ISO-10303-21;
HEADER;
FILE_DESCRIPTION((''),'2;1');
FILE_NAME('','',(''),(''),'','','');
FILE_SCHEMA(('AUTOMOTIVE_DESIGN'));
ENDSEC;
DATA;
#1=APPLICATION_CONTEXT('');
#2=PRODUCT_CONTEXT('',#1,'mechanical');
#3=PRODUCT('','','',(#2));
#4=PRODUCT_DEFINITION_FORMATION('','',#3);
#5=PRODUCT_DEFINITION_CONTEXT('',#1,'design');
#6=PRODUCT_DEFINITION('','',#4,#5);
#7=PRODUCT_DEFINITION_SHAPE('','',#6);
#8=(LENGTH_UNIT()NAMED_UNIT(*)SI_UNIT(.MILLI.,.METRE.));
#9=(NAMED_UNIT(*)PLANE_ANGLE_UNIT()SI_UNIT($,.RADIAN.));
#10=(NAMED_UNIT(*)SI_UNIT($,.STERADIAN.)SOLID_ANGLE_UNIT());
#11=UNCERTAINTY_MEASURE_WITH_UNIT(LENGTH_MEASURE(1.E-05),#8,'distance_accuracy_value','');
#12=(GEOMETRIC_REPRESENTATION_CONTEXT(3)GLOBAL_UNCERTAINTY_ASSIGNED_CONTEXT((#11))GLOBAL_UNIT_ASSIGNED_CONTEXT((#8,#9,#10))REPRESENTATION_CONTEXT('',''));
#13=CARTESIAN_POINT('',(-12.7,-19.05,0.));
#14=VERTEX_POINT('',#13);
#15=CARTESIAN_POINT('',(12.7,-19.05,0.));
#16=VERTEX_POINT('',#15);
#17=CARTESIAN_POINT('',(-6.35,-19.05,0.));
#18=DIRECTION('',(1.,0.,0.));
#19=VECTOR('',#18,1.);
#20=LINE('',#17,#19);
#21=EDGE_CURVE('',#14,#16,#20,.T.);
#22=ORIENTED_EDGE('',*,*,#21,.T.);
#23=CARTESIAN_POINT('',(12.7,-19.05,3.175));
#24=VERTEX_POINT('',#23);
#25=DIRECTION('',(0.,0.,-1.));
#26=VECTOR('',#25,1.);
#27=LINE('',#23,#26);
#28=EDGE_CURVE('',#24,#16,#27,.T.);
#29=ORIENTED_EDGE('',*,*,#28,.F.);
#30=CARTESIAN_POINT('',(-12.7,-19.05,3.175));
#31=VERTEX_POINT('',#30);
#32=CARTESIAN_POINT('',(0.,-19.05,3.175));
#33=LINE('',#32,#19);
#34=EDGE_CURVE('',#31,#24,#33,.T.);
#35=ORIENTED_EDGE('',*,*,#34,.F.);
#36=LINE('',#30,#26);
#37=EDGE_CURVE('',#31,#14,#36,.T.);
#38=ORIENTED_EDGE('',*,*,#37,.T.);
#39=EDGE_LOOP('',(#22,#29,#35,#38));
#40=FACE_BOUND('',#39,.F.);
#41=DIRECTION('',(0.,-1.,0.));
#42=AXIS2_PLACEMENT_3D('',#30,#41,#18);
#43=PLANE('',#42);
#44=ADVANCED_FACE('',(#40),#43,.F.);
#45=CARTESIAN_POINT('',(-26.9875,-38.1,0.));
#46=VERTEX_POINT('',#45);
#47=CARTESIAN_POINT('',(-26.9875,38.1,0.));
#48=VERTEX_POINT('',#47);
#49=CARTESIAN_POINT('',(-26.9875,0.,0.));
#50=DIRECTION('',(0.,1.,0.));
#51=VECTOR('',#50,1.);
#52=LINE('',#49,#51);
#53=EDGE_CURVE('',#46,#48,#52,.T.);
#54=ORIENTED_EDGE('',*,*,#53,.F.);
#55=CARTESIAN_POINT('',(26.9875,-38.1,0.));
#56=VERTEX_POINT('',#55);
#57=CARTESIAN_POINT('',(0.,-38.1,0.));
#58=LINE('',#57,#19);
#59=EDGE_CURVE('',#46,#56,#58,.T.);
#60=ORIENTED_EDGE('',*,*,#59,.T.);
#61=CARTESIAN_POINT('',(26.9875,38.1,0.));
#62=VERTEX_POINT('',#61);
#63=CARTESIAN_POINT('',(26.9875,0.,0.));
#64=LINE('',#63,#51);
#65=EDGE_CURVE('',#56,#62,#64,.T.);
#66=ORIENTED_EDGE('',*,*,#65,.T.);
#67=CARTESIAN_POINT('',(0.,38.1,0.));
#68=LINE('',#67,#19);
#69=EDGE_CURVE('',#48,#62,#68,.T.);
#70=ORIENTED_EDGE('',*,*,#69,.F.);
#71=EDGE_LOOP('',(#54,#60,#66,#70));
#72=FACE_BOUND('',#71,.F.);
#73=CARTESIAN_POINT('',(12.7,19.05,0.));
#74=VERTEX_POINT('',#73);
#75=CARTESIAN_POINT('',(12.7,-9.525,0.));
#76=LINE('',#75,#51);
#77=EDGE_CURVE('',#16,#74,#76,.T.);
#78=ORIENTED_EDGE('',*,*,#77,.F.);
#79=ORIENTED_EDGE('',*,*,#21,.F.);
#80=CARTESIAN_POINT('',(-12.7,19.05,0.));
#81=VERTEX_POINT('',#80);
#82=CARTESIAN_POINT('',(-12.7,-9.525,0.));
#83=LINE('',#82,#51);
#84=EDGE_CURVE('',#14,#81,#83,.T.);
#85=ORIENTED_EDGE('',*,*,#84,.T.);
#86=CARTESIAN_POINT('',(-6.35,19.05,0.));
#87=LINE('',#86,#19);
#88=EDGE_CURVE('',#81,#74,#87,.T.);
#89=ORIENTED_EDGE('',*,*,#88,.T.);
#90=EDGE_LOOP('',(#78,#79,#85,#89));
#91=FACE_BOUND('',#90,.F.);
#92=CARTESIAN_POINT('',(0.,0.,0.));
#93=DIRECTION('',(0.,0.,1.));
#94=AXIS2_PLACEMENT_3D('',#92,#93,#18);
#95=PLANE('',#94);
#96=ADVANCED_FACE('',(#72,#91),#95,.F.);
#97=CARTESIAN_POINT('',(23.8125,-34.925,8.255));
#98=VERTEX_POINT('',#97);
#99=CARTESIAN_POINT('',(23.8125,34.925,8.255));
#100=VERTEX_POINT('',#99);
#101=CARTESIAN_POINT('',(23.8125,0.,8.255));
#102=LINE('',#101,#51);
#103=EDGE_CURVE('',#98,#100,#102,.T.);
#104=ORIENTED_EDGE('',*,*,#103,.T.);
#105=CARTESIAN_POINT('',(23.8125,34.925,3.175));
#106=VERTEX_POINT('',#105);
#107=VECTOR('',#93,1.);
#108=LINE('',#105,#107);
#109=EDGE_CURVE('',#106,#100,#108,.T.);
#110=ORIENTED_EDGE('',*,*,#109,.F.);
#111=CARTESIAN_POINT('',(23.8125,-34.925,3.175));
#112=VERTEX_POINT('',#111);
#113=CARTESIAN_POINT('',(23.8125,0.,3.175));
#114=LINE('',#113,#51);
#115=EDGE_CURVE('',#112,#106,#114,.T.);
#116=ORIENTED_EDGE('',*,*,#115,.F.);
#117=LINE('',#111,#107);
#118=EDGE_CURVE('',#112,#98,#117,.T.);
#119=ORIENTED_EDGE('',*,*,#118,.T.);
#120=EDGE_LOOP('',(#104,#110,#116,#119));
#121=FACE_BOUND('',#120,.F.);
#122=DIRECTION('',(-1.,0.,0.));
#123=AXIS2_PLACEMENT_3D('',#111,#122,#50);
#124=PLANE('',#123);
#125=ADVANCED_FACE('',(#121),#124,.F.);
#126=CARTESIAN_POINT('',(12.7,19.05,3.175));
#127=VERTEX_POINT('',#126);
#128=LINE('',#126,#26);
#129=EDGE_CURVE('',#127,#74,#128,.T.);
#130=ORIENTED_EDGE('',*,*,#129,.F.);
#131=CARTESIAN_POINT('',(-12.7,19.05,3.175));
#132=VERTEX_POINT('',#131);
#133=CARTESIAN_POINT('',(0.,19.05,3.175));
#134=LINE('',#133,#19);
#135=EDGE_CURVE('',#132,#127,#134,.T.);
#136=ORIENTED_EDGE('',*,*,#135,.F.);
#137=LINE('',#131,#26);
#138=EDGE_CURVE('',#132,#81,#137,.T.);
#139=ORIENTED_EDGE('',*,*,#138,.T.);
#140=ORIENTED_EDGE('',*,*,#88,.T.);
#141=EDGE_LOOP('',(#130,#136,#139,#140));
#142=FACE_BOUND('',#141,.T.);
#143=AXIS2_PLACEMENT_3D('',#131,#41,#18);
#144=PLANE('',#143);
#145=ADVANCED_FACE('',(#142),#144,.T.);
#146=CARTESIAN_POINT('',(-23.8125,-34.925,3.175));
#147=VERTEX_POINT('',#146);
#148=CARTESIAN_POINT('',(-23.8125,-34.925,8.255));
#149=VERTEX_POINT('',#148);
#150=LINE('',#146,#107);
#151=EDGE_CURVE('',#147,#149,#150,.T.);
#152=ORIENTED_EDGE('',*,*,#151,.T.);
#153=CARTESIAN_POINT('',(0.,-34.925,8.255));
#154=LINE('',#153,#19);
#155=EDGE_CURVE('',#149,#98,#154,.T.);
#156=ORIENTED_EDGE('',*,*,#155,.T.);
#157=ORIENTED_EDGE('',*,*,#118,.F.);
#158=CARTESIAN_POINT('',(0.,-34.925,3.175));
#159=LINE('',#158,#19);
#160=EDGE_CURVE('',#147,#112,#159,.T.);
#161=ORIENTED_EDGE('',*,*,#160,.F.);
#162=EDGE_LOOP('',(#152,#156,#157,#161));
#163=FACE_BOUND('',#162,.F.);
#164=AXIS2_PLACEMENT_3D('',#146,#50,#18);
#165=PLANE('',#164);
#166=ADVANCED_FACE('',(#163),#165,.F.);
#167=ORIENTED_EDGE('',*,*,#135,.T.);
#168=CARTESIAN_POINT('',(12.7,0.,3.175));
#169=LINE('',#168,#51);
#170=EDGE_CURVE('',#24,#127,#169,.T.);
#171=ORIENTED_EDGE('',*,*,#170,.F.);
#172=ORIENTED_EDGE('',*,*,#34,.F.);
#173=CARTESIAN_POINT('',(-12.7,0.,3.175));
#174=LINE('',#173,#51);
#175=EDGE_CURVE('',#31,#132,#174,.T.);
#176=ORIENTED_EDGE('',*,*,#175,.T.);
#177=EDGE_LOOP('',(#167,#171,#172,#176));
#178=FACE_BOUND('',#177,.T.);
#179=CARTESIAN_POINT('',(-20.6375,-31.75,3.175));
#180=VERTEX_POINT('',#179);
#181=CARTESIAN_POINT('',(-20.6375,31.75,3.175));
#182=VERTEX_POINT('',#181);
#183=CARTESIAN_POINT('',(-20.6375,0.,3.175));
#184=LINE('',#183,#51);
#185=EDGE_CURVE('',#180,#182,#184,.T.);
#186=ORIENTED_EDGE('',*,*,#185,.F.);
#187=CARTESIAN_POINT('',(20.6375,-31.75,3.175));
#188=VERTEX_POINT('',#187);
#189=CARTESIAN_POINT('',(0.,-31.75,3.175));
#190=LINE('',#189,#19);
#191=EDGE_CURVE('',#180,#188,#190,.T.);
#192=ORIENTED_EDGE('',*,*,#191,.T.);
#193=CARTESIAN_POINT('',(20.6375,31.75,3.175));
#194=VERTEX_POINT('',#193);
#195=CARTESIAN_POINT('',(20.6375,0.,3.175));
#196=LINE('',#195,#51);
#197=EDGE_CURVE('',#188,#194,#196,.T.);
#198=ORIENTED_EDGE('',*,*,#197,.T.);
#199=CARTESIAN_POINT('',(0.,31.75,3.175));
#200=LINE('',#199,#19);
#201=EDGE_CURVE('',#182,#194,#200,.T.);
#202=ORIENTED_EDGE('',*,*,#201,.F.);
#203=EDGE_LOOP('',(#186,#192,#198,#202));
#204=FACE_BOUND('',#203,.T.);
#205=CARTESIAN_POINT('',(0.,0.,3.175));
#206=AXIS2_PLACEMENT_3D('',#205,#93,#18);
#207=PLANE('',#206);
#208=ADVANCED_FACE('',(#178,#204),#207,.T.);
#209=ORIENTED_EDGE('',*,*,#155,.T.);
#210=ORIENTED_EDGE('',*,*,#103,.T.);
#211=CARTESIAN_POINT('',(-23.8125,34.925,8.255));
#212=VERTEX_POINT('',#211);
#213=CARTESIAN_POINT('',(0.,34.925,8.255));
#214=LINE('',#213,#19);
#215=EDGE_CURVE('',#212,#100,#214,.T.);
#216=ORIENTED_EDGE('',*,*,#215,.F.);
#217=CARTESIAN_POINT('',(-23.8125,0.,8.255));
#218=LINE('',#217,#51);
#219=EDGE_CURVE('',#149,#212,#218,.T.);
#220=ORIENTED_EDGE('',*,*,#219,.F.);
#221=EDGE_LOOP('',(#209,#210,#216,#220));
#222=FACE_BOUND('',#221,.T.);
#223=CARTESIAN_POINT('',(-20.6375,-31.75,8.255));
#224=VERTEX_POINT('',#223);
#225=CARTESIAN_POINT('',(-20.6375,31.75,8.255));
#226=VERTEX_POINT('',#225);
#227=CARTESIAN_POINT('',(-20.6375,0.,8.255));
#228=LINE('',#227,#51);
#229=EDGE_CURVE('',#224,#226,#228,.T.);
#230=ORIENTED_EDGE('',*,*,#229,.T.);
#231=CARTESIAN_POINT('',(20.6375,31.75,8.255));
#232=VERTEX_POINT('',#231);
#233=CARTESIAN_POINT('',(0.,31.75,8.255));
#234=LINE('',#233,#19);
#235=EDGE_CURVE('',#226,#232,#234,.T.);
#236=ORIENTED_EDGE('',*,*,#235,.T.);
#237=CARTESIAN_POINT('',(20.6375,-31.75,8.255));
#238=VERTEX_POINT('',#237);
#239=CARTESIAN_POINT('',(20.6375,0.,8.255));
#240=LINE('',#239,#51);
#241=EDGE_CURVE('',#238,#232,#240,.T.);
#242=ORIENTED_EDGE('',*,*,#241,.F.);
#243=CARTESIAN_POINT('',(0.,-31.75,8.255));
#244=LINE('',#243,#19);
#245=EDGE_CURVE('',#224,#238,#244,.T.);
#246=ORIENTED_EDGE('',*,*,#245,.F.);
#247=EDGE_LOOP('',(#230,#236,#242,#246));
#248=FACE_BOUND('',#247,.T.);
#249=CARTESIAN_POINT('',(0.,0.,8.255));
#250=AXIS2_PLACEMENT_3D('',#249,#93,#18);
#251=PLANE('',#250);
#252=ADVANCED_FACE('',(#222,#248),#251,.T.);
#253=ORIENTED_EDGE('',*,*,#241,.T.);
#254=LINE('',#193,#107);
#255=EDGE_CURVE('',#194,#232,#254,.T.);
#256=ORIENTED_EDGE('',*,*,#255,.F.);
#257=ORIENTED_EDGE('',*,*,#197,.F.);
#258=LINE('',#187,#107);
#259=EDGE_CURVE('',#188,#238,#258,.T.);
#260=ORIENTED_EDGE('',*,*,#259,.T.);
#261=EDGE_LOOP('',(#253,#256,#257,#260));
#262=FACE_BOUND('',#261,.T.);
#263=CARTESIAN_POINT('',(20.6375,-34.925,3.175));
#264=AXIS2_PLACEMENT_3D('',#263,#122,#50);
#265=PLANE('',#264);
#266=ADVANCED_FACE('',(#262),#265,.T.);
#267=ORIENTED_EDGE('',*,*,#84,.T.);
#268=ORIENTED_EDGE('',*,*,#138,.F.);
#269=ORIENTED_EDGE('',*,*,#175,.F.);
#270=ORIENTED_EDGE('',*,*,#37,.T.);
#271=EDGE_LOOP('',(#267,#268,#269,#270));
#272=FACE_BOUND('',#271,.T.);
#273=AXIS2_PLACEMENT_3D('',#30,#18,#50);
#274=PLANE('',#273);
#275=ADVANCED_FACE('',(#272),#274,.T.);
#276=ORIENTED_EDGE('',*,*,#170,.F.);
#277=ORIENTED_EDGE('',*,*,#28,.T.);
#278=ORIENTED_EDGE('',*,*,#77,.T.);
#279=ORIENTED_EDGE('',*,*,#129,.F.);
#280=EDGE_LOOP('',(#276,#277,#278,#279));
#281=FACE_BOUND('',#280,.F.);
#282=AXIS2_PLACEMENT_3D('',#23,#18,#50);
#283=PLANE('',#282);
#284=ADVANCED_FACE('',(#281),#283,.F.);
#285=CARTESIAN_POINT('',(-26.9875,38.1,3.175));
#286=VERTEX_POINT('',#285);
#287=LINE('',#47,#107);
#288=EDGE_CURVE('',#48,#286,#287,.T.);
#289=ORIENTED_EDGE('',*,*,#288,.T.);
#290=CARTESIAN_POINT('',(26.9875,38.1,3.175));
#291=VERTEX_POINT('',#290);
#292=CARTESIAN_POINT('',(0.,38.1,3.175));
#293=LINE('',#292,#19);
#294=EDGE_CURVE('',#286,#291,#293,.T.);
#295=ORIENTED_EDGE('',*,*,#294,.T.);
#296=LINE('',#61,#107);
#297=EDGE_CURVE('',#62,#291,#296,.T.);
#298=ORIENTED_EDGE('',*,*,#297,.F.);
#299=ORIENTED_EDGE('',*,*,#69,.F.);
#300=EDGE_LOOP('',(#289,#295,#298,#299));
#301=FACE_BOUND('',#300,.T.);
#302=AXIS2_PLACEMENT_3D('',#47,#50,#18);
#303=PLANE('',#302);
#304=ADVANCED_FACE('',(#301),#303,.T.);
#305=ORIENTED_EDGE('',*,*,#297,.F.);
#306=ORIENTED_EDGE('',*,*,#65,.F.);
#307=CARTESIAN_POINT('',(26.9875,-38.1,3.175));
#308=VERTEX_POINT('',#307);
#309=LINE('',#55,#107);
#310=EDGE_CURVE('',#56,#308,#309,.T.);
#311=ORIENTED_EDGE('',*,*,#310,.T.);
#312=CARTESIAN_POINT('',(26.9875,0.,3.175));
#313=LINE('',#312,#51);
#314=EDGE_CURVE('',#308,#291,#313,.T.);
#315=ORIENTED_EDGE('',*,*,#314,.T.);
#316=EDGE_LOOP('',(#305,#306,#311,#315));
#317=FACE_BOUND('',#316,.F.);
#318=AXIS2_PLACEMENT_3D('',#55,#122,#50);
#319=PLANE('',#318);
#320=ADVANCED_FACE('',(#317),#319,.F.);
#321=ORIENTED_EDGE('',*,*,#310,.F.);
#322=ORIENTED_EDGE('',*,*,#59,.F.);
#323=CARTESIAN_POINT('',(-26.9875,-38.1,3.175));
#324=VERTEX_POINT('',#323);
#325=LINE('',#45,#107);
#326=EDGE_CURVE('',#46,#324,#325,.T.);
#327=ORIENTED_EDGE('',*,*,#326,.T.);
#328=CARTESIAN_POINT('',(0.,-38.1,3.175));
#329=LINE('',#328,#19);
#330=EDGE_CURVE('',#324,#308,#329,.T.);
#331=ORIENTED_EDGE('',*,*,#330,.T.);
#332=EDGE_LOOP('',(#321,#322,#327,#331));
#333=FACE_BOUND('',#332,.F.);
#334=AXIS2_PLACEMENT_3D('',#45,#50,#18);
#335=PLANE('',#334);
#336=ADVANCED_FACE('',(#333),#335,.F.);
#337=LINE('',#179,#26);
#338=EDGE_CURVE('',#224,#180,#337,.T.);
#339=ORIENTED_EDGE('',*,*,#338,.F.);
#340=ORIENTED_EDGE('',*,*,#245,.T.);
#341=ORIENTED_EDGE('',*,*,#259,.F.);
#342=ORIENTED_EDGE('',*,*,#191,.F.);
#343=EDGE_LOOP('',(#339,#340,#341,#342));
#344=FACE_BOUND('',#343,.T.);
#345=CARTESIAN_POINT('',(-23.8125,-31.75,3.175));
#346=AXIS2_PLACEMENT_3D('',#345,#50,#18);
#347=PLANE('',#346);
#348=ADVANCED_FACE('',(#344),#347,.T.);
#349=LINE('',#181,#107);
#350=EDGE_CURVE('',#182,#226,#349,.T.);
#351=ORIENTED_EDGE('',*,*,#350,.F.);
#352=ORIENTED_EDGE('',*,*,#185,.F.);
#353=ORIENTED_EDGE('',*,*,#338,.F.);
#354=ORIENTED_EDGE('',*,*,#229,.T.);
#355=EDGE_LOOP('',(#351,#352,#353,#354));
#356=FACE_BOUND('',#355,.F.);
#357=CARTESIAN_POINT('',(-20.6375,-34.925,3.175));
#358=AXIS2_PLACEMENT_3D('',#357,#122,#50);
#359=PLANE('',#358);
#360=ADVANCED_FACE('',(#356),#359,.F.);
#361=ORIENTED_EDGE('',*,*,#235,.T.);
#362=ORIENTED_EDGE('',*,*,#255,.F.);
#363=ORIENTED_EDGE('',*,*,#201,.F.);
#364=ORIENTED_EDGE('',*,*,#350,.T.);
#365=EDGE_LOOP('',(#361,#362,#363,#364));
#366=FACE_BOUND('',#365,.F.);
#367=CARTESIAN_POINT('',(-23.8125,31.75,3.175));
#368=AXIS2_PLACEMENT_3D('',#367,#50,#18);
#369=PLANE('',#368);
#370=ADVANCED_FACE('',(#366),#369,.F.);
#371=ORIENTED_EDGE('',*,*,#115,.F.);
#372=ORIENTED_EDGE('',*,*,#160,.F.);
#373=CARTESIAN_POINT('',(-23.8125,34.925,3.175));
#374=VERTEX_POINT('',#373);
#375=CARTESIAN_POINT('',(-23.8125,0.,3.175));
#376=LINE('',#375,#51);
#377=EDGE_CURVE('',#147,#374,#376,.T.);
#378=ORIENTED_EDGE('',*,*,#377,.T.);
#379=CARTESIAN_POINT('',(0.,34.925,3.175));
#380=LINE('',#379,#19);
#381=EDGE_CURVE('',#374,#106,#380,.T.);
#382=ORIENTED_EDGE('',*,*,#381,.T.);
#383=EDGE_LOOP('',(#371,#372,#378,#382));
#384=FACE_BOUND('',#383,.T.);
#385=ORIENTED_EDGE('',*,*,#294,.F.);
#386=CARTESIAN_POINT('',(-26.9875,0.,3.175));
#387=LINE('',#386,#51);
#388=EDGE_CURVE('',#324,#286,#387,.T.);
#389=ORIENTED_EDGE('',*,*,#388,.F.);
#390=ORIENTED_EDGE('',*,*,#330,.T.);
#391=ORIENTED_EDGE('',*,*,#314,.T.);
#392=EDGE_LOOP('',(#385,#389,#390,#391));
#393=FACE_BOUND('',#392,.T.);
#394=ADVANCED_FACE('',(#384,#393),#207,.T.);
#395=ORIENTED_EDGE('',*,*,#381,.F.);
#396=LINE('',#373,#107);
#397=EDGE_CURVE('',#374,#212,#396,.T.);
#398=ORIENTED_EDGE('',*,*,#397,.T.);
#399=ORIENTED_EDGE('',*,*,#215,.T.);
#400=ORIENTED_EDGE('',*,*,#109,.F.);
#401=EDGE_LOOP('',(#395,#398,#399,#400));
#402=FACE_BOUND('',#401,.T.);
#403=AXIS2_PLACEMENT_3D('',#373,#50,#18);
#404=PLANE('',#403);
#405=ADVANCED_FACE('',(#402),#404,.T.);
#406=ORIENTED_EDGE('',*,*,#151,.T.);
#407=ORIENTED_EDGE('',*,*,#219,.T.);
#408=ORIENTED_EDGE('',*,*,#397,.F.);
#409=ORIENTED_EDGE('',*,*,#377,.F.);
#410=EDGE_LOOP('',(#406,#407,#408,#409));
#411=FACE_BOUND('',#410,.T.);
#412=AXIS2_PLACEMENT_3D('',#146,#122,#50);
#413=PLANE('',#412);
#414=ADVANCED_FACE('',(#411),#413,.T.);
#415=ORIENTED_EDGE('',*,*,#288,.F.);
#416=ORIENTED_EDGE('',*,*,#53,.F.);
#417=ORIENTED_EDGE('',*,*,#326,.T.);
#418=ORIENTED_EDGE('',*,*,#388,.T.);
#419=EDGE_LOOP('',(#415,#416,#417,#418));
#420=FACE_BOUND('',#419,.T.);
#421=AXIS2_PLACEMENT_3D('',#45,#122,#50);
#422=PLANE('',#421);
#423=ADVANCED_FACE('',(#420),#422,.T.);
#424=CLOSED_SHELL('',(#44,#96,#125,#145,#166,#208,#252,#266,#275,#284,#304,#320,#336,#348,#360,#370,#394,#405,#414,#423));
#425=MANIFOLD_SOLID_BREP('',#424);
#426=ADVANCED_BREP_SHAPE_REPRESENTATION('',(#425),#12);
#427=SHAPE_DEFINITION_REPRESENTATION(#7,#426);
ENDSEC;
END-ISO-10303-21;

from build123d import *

# Parameters (mm, degrees)
F0_W        = 53.975
F0_H        = 76.2
F1_DEPTH    = 3.175
F2_W        = 47.625
F2_H        = 69.85
F3_DEPTH    = 5.08
F4_T        = 3.175
F4_T3_DEPTH = 53.975
F4_T5_DEPTH = 76.2
F5_W        = 25.4
F5_H        = 38.1
F6_DEPTH    = 25.4


# Not quite as in the source:
# - a shell that OpenCascade refuses in one call is made with other operations: the cavity is built on its own and cut out


with BuildPart() as f1:
    # F0 (on Top) → F1 (new body)
    with BuildSketch(Plane.XY):
        Rectangle(F0_W, F0_H)
    extrude(amount=F1_DEPTH)

    # F2 (on face) → F3 (join)
    with BuildSketch(Plane.XY.offset(3.175)):
        Rectangle(F2_W, F2_H)
    extrude(amount=F3_DEPTH)

    # F4: shell of thickness 3.175, made by hand


with BuildPart() as f4_core1:
    # F4_t2: copy of F1
    add(f1.part)

    # the walls: a layer under each face that stays
    f4_faces = [f4_core1.faces().sort_by_distance(p)[0] for p in [
        (0, 38.1, 1.5875),
        (26.9875, 0, 1.5875),
        (-26.9875, 0, 1.5875),
        (0, 0, 0),
        (-25.1883333333, -35.56, 3.175),
        (0, -38.1, 1.5875),
        (0, 34.925, 5.715),
        (-23.8125, 0, 5.715),
        (0, -34.925, 5.715),
        (23.8125, 0, 5.715),
    ]]
    thicken(f4_faces, amount=-F4_T, mode=Mode.SUBTRACT)

    # F4_s4 → F4_t3 (cut)
    with BuildSketch(Plane.YZ.offset(-26.9875)):
        Polygon((34.95675, 3.20675), (34.925, 0), (31.75, 0), (31.75, 3.175), align=None)
        Polygon((-34.95675, 3.20675), (-34.925, 0), (-31.75, 0), (-31.75, 3.175), align=None)
    extrude(amount=F4_T3_DEPTH, mode=Mode.SUBTRACT)

    # F4_s6 → F4_t5 (cut)
    with BuildSketch(Plane.XZ.offset(-38.1)):
        Polygon((-23.84425, 3.20675), (-23.8125, 0), (-20.6375, 0), (-20.6375, 3.175), align=None)
        Polygon((23.84425, 3.20675), (23.8125, 0), (20.6375, 0), (20.6375, 3.175), align=None)
    extrude(amount=F4_T5_DEPTH, mode=Mode.SUBTRACT)


with BuildPart() as f1_1:
    add(f1.part)

    # what is left inside the walls is the cavity
    f4_cavity = [f4_core1.part.solids().sort_by_distance(p)[0] for p in [
        (0, -10.583333, 3.20675),
    ]]
    add(f4_cavity, mode=Mode.SUBTRACT)

    # F5 (on face) → F6 (cut)
    with BuildSketch(Plane.XY.offset(3.175)):
        Rectangle(F5_W, F5_H)
    extrude(amount=-F6_DEPTH, mode=Mode.SUBTRACT)


solid = f1_1.part
